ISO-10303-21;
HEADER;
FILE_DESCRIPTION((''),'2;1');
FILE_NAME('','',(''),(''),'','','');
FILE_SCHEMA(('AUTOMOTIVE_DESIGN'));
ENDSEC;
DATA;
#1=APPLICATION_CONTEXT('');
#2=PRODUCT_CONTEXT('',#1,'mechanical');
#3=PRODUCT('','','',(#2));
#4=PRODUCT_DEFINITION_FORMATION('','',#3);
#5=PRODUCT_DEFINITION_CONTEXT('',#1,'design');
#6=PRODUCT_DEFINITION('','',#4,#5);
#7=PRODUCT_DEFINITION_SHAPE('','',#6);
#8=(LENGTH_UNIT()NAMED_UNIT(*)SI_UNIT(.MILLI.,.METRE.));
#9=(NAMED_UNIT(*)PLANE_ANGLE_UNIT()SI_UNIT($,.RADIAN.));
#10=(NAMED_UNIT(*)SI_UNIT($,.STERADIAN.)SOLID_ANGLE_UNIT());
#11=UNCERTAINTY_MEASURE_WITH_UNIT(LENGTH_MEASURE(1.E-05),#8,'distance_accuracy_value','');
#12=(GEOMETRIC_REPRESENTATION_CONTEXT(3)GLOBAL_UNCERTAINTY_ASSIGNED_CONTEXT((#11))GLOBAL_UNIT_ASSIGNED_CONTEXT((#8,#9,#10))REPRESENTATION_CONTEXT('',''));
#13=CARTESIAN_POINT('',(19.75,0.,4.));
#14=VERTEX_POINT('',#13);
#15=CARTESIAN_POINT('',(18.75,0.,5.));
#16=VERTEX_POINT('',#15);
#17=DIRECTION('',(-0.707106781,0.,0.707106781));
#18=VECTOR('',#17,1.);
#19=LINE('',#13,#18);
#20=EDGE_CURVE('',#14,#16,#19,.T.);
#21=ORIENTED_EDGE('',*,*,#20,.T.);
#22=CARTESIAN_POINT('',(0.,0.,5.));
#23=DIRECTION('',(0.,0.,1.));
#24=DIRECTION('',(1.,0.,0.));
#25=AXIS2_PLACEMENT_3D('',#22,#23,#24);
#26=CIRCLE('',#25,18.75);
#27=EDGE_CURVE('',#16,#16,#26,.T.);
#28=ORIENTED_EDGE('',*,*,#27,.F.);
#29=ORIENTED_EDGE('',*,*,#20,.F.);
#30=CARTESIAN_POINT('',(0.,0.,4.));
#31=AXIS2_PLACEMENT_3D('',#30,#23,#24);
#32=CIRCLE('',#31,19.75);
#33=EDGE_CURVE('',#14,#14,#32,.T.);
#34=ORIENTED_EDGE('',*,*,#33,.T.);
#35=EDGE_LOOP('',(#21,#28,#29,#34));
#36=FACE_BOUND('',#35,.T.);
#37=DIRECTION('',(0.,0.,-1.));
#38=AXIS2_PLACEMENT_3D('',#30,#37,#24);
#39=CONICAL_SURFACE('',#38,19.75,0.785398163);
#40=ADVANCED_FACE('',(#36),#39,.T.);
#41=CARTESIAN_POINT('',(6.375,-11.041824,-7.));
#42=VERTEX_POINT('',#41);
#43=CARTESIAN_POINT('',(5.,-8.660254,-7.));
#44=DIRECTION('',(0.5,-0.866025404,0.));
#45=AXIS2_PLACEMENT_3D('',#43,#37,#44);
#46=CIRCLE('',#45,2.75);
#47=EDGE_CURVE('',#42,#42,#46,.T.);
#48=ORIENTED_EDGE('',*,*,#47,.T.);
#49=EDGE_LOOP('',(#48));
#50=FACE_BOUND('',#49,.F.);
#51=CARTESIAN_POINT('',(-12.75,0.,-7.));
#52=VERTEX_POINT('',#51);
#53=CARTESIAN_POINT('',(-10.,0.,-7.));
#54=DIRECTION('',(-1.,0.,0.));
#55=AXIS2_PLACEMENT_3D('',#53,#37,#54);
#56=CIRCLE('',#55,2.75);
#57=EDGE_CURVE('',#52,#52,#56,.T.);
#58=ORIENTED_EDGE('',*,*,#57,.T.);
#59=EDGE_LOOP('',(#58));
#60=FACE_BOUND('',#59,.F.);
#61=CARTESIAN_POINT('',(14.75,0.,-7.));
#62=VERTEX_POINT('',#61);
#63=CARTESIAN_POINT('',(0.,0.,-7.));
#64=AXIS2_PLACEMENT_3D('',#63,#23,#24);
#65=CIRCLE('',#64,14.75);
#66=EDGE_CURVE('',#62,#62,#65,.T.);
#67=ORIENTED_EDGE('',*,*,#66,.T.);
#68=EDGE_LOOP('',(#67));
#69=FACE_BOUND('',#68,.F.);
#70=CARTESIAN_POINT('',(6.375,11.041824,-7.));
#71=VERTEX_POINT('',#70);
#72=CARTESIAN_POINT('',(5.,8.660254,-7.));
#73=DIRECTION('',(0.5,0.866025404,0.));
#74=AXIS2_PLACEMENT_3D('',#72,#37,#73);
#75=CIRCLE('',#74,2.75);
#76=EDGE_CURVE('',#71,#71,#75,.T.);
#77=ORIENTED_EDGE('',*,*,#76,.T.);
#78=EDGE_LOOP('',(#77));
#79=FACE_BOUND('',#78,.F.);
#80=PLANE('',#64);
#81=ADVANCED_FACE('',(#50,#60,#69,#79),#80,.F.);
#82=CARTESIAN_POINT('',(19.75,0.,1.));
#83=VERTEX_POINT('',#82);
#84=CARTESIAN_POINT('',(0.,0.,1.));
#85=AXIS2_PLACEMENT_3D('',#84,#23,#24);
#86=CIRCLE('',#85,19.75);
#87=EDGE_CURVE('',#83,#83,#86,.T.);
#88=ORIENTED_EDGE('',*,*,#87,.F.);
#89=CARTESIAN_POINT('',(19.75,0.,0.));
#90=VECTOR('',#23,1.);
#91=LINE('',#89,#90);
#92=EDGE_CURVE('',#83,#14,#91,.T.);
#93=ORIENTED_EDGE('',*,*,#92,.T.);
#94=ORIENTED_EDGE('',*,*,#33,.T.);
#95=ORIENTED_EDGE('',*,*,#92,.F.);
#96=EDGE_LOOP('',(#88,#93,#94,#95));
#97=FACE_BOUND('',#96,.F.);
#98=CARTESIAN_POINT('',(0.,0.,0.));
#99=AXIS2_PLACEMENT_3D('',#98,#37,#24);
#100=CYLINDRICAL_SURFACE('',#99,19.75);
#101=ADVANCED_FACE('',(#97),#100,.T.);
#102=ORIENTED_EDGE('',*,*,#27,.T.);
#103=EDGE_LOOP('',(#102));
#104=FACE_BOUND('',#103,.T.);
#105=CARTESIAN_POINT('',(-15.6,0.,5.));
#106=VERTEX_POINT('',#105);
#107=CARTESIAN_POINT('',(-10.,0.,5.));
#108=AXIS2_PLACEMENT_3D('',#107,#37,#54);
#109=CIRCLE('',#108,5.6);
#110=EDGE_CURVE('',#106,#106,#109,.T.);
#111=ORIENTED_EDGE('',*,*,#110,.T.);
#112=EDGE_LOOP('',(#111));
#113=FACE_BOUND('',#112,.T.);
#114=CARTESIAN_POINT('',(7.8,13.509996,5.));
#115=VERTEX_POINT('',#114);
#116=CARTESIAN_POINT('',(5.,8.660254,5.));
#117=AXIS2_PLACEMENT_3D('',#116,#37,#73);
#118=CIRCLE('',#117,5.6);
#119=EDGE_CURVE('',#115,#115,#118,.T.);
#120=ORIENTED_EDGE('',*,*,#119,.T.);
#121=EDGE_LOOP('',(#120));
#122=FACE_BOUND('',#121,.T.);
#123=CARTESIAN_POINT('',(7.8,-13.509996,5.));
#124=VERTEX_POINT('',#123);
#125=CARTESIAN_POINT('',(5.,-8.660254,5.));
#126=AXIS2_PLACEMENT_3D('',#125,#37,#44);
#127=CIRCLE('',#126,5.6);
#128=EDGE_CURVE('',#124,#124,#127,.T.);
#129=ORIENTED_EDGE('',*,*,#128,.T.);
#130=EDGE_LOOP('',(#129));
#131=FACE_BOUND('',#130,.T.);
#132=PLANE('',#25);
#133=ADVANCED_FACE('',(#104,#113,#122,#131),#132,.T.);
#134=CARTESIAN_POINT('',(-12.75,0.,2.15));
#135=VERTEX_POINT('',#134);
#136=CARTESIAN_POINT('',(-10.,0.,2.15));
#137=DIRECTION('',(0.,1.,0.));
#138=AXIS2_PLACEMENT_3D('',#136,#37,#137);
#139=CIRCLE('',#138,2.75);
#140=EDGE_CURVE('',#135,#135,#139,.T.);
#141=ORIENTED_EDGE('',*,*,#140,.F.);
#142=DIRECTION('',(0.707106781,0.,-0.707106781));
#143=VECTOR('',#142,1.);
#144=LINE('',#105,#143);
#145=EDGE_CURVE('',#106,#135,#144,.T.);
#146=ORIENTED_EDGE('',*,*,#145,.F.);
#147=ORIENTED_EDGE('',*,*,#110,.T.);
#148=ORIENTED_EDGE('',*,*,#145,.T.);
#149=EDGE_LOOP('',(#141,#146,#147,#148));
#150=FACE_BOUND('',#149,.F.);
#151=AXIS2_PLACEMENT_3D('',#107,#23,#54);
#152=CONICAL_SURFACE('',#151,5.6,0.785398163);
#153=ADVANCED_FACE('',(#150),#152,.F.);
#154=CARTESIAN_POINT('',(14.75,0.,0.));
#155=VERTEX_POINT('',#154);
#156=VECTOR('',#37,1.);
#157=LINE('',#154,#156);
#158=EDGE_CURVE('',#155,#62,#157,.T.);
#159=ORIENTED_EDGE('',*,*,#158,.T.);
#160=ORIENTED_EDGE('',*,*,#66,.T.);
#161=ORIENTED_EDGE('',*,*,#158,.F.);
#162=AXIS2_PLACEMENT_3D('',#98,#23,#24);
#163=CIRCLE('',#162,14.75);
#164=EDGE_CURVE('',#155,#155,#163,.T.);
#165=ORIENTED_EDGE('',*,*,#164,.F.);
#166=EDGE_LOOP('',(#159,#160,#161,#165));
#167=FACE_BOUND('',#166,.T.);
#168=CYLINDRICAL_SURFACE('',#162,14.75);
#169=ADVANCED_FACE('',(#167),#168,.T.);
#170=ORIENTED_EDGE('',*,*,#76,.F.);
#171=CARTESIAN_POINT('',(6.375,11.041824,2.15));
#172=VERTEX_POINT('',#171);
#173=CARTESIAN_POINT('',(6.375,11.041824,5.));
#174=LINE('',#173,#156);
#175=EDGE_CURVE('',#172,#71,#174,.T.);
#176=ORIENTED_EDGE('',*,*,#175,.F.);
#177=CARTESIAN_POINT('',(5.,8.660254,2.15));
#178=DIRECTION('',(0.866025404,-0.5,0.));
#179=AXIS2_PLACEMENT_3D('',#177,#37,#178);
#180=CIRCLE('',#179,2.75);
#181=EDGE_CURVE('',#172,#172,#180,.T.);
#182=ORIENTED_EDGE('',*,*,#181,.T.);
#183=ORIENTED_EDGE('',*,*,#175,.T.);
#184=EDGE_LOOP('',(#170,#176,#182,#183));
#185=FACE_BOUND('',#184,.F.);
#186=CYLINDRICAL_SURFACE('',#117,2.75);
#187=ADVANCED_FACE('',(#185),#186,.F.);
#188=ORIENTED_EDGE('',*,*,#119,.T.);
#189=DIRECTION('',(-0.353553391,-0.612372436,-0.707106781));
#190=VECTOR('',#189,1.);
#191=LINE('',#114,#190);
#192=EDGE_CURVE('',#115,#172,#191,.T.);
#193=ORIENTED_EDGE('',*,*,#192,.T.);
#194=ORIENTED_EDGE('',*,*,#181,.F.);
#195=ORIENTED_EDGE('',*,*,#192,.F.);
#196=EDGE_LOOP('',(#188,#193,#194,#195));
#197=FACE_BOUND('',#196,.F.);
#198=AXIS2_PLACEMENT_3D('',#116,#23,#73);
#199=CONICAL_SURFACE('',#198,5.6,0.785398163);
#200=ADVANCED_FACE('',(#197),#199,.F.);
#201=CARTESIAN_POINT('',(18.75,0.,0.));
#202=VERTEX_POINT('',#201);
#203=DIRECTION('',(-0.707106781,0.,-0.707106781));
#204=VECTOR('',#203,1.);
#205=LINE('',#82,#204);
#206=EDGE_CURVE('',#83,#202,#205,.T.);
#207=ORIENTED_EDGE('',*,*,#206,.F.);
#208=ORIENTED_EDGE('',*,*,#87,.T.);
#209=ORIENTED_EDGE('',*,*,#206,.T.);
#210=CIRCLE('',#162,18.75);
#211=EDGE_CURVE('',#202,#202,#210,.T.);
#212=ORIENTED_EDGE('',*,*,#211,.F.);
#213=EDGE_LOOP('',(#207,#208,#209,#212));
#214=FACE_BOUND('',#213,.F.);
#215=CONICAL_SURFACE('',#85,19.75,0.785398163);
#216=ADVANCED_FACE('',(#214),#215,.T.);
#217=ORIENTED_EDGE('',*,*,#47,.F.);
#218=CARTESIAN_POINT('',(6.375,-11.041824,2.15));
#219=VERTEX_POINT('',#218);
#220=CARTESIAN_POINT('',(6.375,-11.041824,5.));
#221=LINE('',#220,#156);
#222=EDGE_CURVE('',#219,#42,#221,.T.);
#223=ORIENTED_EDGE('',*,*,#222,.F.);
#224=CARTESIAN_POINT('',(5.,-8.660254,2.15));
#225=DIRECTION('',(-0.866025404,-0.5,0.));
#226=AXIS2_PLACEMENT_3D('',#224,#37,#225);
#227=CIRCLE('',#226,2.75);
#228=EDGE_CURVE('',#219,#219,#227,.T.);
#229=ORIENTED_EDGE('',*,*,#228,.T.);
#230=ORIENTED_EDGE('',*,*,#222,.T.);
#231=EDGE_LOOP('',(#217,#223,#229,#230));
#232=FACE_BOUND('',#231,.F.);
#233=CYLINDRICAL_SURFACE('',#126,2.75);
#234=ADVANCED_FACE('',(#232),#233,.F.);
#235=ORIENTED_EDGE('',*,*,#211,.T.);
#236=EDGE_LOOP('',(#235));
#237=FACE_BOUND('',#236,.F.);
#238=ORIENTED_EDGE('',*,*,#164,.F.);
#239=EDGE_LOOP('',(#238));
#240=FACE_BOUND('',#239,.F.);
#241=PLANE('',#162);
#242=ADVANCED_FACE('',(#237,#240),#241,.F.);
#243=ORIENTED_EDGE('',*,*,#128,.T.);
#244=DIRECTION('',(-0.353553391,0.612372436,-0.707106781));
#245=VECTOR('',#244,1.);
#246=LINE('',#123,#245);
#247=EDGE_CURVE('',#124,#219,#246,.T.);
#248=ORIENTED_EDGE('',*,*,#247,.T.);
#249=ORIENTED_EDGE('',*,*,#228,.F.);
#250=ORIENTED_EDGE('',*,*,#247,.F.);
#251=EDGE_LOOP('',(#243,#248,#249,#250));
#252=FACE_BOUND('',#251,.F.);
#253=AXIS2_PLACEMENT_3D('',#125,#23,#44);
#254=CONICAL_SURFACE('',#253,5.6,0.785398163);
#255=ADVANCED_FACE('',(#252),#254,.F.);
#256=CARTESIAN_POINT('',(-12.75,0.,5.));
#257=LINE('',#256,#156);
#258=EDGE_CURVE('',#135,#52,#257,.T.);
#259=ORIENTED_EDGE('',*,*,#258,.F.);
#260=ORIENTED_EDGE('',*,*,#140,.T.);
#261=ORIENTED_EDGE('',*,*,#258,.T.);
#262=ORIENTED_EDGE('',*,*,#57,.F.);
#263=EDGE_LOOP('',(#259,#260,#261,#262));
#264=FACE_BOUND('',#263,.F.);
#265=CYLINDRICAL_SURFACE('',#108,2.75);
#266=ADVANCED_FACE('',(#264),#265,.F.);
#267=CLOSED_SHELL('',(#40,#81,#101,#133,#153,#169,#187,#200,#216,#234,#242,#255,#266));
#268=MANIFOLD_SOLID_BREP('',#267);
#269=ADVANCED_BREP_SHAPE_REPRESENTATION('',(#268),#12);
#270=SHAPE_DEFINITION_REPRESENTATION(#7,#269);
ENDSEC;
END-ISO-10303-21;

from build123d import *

# Parameters (mm, degrees)
F0_R            = 14.75
F2_DEPTH        = 7
F3_R            = 19.75
F3_R_2          = 14.75
F4_DEPTH        = 5
F6_D            = 5.5
F6_CSINK_D      = 11.2
F6_CSINK_ANGLE  = 90
F6_COPIES_COUNT = 3
F7_SIZE         = 1


# Not quite as in the source:
# - a pattern or mirror of a feature is missing from the dataset's text; its kind, count and spacing are read off the source's solid


with BuildPart() as f2:
    # F0 (on Top) → F2 (new body)
    with BuildSketch(Plane.XY):
        Circle(F0_R)
    extrude(amount=-F2_DEPTH)

    # F3 (on face) → F4 (join)
    with BuildSketch(Plane.XY):
        Circle(F3_R)
        Circle(F3_R_2, mode=Mode.SUBTRACT)
        Circle(F3_R_2)
    extrude(amount=F4_DEPTH)

    # F6 (through all)
    with Locations(Plane.XY.offset(5)):
        with Locations((-10, 0)):
            f6 = CounterSinkHole(F6_D / 2, F6_CSINK_D / 2, counter_sink_angle=F6_CSINK_ANGLE)

    # F6_copies: F6 ×3 about axis
    f6_copies_axis = Axis((0, 0, 0), (0, 0, 1))
    for i in range(1, F6_COPIES_COUNT):
        add(f6.rotate(f6_copies_axis, i * 360 / F6_COPIES_COUNT), mode=Mode.SUBTRACT)

    # F7
    f7_edges = [f2.edges().sort_by_distance(p)[0] for p in [
        (-19.75, 0, 5),
        (-19.75, 0, 0),
    ]]
    chamfer(f7_edges, length=F7_SIZE)


solid = f2.part
